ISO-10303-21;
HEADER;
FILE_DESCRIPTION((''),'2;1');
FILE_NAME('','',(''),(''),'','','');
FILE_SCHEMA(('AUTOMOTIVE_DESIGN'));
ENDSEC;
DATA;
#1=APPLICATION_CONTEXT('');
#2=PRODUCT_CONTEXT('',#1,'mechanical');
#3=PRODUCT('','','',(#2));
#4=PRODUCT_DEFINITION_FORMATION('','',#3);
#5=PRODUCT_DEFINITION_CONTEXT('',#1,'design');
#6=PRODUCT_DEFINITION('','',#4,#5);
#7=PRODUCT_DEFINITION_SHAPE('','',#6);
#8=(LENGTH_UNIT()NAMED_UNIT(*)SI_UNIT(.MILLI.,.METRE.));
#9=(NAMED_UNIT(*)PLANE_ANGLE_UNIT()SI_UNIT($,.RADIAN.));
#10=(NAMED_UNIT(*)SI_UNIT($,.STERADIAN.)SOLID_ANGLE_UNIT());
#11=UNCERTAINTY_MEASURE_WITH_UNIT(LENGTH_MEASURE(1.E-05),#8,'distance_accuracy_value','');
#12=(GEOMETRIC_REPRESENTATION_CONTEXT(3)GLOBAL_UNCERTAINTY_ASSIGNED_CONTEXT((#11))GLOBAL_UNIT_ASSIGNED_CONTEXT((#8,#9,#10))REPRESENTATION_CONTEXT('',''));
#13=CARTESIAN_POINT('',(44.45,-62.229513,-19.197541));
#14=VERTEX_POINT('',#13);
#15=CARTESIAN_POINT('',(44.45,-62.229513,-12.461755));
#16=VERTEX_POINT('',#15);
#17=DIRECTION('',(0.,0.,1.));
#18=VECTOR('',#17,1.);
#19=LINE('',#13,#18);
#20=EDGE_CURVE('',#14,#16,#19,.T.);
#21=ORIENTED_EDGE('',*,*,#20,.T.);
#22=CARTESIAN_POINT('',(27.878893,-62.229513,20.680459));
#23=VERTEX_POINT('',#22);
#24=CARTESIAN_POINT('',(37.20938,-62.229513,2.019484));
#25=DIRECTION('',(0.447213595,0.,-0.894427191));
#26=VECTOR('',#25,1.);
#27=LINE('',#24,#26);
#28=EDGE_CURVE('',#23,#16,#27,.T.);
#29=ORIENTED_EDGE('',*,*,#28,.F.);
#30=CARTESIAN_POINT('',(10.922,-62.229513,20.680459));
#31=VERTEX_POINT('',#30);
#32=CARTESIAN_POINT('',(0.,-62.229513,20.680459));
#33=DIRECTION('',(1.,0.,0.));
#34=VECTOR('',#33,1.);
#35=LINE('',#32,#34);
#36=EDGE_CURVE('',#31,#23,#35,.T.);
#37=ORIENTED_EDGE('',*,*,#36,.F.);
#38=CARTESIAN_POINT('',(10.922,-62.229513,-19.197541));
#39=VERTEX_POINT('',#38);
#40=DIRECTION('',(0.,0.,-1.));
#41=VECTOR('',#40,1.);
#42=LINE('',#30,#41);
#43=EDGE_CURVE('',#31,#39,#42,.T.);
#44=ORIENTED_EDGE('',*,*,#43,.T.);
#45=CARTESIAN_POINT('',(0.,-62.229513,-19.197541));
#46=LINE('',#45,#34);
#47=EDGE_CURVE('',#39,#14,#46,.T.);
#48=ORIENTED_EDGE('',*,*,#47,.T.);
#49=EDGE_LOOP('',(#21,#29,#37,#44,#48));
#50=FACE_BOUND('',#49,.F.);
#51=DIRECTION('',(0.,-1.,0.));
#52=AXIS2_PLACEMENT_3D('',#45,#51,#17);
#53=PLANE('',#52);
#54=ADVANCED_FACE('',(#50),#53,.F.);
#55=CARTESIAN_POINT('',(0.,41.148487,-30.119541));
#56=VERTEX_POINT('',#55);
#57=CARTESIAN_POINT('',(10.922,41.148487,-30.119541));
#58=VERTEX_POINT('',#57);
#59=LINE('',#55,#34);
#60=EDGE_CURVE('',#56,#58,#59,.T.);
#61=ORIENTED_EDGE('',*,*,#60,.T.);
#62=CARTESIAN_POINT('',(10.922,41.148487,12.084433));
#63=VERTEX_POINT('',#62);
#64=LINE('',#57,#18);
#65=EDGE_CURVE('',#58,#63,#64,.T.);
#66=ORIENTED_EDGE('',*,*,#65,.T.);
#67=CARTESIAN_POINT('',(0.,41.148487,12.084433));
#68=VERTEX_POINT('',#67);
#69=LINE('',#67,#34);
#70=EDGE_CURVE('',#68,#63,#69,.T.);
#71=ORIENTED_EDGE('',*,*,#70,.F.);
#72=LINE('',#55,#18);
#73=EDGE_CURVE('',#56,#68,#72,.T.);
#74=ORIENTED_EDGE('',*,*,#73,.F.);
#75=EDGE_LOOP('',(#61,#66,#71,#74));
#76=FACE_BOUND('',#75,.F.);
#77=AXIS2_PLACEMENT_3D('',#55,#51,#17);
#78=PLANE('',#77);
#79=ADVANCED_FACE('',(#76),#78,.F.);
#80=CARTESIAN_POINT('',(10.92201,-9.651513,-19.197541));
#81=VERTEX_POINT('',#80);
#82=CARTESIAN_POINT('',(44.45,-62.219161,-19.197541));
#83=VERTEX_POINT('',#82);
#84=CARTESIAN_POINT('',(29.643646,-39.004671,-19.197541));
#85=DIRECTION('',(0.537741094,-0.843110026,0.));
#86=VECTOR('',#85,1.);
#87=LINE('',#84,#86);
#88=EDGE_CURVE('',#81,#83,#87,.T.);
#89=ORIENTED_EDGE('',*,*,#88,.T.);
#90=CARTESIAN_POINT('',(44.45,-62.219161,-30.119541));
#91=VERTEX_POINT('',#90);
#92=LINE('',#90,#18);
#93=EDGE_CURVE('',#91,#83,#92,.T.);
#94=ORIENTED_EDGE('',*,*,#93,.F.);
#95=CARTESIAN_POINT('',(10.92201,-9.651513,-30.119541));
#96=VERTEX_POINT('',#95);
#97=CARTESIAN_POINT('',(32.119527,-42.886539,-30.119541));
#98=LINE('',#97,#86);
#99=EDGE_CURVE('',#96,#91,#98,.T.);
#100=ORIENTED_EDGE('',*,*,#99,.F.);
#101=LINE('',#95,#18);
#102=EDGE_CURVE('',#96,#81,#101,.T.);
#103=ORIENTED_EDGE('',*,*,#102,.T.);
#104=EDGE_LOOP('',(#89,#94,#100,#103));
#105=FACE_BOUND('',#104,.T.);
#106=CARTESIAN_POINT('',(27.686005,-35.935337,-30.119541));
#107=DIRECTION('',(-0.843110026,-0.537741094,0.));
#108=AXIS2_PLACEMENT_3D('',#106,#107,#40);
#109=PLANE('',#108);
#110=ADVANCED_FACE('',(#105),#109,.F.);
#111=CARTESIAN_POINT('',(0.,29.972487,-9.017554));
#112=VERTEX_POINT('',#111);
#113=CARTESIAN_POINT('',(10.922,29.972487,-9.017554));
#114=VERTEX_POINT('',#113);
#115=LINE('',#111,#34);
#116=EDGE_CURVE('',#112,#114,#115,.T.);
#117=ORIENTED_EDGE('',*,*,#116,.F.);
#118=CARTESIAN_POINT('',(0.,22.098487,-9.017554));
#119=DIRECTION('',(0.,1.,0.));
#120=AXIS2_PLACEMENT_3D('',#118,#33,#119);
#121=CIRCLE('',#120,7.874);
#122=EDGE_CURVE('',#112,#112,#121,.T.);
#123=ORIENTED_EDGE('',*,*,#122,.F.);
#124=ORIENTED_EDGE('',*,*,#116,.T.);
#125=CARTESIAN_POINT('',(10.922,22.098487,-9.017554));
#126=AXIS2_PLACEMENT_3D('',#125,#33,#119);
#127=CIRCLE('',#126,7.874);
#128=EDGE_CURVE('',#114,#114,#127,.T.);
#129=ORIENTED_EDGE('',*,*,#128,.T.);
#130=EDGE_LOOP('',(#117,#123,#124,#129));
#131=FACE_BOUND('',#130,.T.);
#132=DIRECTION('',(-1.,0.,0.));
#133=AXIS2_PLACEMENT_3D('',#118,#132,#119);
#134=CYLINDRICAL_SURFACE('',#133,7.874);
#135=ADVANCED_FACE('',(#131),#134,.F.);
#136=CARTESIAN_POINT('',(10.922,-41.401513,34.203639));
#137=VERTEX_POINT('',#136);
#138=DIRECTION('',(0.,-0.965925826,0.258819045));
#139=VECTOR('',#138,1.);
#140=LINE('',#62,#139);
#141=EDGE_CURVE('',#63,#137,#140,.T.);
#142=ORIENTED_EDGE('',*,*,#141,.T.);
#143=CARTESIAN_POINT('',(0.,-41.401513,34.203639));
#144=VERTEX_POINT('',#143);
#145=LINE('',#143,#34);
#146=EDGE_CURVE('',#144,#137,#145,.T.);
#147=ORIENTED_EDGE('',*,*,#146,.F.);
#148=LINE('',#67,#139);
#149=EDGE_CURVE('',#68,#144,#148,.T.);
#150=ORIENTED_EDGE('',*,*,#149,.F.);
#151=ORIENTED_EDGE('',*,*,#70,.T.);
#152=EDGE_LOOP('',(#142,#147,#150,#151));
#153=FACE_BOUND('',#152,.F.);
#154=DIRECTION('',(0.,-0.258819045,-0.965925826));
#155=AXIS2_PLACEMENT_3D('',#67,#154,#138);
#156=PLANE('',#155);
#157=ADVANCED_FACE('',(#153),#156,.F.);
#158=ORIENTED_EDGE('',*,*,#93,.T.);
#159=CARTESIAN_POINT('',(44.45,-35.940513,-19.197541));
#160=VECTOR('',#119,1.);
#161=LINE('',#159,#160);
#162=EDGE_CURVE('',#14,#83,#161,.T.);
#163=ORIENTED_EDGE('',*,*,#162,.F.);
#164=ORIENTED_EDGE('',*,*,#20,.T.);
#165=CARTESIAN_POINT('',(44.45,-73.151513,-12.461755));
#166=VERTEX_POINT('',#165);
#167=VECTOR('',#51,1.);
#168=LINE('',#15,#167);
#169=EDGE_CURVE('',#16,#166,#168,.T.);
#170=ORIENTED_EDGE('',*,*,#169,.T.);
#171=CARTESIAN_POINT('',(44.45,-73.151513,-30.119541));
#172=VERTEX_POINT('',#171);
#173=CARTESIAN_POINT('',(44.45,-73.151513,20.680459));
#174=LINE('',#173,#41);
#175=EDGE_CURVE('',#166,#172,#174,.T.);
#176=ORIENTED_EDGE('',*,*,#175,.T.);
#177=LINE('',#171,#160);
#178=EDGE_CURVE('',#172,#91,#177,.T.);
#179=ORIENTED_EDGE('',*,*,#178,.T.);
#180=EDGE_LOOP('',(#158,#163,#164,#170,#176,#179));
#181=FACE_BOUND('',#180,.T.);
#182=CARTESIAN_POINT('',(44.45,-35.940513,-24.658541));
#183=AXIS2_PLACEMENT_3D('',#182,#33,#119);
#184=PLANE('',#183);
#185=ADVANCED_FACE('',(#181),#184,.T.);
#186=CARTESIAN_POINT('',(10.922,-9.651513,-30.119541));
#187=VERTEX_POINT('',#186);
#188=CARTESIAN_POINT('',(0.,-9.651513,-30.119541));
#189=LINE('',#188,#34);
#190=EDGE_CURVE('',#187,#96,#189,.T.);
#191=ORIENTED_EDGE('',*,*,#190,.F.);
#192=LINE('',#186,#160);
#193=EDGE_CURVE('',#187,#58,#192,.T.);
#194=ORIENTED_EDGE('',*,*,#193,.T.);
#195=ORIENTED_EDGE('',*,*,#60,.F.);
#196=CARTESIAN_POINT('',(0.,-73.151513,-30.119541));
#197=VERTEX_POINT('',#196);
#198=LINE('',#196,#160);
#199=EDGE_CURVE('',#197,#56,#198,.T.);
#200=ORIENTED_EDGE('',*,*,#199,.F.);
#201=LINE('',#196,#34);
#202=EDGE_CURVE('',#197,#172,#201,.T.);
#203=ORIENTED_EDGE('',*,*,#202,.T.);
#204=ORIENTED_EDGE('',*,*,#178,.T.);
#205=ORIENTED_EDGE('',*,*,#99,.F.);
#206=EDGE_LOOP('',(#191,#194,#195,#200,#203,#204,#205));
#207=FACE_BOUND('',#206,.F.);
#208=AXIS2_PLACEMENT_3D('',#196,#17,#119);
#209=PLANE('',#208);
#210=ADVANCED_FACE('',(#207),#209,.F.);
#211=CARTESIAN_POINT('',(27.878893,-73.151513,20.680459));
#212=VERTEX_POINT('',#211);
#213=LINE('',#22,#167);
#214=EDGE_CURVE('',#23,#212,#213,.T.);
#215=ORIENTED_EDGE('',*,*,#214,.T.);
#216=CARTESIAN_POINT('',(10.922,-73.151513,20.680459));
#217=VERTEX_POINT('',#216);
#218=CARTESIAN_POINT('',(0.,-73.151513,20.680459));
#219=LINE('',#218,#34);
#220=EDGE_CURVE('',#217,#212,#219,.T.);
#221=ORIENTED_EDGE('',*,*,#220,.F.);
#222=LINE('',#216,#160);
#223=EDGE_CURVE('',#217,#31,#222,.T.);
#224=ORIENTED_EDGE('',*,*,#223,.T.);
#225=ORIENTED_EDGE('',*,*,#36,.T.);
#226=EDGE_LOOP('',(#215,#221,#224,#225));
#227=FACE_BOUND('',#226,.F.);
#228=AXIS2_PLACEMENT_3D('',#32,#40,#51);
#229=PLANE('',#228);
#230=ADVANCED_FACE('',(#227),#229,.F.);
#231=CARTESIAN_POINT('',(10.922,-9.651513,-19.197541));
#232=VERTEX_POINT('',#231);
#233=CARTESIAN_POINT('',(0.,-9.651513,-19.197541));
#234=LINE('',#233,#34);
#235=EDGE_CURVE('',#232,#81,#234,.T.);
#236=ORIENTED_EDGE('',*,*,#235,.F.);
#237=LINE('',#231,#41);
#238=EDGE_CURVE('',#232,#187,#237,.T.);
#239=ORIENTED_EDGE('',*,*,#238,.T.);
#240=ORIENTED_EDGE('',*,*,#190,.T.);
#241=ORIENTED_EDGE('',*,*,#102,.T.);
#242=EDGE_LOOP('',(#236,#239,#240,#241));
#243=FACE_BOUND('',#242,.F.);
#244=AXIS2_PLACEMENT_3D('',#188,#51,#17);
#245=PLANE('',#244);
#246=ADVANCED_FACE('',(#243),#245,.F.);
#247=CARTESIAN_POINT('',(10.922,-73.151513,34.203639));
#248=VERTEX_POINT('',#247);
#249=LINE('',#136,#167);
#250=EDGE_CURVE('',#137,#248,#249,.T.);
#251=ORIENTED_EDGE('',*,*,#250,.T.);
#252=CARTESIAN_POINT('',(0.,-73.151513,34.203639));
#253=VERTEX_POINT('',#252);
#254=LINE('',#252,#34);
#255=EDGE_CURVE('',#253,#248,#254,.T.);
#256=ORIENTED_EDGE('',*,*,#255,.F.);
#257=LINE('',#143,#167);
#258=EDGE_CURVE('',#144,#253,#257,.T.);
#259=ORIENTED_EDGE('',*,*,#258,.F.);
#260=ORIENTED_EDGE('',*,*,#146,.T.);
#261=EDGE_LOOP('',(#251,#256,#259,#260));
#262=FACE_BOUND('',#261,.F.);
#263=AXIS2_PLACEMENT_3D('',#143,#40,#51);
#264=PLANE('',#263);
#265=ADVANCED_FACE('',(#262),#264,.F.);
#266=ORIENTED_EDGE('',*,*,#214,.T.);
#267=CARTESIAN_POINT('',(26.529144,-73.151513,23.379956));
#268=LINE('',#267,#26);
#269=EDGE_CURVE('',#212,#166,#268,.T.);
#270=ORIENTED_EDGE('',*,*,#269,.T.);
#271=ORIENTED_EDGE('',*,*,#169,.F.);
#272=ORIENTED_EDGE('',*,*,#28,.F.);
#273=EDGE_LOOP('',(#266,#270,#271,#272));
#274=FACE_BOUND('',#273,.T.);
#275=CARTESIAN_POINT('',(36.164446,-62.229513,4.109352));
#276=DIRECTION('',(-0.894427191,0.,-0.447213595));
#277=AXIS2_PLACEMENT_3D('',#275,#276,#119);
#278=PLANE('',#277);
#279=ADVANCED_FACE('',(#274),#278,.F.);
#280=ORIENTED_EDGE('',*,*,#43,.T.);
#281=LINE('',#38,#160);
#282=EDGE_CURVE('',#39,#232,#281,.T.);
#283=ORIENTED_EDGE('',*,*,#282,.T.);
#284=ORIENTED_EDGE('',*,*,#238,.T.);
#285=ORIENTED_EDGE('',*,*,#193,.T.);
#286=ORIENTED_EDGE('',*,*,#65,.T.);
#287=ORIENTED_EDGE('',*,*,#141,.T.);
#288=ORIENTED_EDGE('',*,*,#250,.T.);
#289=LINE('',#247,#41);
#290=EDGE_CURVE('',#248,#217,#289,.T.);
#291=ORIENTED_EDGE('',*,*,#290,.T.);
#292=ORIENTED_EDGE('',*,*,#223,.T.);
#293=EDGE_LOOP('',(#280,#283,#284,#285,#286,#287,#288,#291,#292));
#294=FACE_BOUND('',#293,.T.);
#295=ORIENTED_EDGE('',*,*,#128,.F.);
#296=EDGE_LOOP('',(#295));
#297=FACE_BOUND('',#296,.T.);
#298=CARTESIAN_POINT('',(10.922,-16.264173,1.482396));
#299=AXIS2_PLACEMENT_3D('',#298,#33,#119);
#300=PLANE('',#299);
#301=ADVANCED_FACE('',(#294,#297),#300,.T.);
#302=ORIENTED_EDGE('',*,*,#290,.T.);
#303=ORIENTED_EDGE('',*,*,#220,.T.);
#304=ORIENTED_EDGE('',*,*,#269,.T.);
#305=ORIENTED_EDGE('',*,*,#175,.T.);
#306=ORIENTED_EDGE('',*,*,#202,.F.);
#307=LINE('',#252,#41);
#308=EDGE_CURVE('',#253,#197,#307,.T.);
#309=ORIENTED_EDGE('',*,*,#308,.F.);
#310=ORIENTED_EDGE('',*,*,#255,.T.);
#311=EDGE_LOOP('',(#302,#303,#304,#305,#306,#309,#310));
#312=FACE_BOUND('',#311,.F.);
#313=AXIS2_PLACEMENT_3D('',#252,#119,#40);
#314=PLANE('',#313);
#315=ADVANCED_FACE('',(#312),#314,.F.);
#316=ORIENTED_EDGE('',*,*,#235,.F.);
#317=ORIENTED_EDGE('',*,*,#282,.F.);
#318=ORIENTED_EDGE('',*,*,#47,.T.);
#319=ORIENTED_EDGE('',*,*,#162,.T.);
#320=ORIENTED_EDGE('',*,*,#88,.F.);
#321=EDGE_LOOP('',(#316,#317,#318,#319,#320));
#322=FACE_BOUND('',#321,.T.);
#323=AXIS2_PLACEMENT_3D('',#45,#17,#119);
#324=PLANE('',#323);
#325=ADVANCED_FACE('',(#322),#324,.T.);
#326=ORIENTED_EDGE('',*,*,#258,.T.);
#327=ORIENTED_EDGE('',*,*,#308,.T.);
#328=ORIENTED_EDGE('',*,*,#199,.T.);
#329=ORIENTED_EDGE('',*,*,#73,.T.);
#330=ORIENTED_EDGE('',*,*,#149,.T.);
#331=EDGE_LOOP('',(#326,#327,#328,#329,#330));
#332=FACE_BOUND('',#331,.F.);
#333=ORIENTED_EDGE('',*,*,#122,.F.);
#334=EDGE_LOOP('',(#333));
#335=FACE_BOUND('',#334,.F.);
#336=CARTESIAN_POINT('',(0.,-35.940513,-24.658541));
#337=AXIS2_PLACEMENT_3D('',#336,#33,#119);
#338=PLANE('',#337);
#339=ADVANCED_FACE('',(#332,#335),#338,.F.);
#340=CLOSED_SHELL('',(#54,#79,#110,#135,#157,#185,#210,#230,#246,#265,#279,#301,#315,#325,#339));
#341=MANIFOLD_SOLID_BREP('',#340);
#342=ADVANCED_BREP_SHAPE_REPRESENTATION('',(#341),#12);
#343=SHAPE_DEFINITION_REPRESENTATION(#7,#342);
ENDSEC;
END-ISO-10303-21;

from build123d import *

# Parameters (mm, degrees)
F0_R     = 7.874
F1_DEPTH = 10.922
F0_W     = 52.578
F0_H     = 10.922
F2_DEPTH = 44.45
F3_SIZE2 = 33.1422148526
F3_SIZE  = 16.5711074262
F4_SIZE2 = 52.567648
F4_SIZE  = 33.52799


# Not quite as in the source:
# - a fillet or chamfer is up to 0.001 mm smaller than in the source, because OpenCascade refuses the exact size


with BuildPart() as f1:
    # F0 (on Right) → F1 (new body)
    with BuildSketch(Plane.YZ):
        Polygon((-41.4015134737, 34.2036390094), (-73.1515134737, 34.2036390094), (-73.1515134737, 20.6804594447), (-62.2295134737, 20.6804594447), (-62.2295134737, -19.1975405553), (-9.6515134737, -19.1975405553), (-9.6515134737, -30.1195405553), (41.1484865263, -30.1195405553), (41.1484865263, 12.0844331742), align=None)
        with Locations((22.0984865263, -9.0175536905)):
            Circle(F0_R, mode=Mode.SUBTRACT)
    extrude(amount=F1_DEPTH)

    # F0 (on Right) → F2 (join)
    with BuildSketch(Plane.YZ):
        with Locations((-35.9405134737, -24.6585405553)):
            Rectangle(F0_W, F0_H)
        Polygon((-62.2295134737, 20.6804594447), (-73.1515134737, 20.6804594447), (-73.1515134737, -30.1195405553), (-62.2295134737, -30.1195405553), (-62.2295134737, -19.1975405553), align=None)
    extrude(amount=F2_DEPTH)

    # F3
    f3_edges = [f1.edges().sort_by_distance(p)[0] for p in [
        (44.45, -67.690513, 20.680459),
    ]]
    f3_side = f1.faces().sort_by_distance((27.686, -67.690513, 20.680459))[0]
    chamfer(f3_edges, length=F3_SIZE, length2=F3_SIZE2, reference=f3_side)

    # F4 (size 33.528 and 52.5676582111 in the source; OpenCascade refuses exactly that, so slightly less here)
    f4_edges = [f1.edges().sort_by_distance(p)[0] for p in [
        (44.45, -9.651513, -24.658541),
    ]]
    f4_side = f1.faces().sort_by_distance((27.686, -9.651513, -24.658541))[0]
    chamfer(f4_edges, length=F4_SIZE, length2=F4_SIZE2, reference=f4_side)


solid = f1.part
